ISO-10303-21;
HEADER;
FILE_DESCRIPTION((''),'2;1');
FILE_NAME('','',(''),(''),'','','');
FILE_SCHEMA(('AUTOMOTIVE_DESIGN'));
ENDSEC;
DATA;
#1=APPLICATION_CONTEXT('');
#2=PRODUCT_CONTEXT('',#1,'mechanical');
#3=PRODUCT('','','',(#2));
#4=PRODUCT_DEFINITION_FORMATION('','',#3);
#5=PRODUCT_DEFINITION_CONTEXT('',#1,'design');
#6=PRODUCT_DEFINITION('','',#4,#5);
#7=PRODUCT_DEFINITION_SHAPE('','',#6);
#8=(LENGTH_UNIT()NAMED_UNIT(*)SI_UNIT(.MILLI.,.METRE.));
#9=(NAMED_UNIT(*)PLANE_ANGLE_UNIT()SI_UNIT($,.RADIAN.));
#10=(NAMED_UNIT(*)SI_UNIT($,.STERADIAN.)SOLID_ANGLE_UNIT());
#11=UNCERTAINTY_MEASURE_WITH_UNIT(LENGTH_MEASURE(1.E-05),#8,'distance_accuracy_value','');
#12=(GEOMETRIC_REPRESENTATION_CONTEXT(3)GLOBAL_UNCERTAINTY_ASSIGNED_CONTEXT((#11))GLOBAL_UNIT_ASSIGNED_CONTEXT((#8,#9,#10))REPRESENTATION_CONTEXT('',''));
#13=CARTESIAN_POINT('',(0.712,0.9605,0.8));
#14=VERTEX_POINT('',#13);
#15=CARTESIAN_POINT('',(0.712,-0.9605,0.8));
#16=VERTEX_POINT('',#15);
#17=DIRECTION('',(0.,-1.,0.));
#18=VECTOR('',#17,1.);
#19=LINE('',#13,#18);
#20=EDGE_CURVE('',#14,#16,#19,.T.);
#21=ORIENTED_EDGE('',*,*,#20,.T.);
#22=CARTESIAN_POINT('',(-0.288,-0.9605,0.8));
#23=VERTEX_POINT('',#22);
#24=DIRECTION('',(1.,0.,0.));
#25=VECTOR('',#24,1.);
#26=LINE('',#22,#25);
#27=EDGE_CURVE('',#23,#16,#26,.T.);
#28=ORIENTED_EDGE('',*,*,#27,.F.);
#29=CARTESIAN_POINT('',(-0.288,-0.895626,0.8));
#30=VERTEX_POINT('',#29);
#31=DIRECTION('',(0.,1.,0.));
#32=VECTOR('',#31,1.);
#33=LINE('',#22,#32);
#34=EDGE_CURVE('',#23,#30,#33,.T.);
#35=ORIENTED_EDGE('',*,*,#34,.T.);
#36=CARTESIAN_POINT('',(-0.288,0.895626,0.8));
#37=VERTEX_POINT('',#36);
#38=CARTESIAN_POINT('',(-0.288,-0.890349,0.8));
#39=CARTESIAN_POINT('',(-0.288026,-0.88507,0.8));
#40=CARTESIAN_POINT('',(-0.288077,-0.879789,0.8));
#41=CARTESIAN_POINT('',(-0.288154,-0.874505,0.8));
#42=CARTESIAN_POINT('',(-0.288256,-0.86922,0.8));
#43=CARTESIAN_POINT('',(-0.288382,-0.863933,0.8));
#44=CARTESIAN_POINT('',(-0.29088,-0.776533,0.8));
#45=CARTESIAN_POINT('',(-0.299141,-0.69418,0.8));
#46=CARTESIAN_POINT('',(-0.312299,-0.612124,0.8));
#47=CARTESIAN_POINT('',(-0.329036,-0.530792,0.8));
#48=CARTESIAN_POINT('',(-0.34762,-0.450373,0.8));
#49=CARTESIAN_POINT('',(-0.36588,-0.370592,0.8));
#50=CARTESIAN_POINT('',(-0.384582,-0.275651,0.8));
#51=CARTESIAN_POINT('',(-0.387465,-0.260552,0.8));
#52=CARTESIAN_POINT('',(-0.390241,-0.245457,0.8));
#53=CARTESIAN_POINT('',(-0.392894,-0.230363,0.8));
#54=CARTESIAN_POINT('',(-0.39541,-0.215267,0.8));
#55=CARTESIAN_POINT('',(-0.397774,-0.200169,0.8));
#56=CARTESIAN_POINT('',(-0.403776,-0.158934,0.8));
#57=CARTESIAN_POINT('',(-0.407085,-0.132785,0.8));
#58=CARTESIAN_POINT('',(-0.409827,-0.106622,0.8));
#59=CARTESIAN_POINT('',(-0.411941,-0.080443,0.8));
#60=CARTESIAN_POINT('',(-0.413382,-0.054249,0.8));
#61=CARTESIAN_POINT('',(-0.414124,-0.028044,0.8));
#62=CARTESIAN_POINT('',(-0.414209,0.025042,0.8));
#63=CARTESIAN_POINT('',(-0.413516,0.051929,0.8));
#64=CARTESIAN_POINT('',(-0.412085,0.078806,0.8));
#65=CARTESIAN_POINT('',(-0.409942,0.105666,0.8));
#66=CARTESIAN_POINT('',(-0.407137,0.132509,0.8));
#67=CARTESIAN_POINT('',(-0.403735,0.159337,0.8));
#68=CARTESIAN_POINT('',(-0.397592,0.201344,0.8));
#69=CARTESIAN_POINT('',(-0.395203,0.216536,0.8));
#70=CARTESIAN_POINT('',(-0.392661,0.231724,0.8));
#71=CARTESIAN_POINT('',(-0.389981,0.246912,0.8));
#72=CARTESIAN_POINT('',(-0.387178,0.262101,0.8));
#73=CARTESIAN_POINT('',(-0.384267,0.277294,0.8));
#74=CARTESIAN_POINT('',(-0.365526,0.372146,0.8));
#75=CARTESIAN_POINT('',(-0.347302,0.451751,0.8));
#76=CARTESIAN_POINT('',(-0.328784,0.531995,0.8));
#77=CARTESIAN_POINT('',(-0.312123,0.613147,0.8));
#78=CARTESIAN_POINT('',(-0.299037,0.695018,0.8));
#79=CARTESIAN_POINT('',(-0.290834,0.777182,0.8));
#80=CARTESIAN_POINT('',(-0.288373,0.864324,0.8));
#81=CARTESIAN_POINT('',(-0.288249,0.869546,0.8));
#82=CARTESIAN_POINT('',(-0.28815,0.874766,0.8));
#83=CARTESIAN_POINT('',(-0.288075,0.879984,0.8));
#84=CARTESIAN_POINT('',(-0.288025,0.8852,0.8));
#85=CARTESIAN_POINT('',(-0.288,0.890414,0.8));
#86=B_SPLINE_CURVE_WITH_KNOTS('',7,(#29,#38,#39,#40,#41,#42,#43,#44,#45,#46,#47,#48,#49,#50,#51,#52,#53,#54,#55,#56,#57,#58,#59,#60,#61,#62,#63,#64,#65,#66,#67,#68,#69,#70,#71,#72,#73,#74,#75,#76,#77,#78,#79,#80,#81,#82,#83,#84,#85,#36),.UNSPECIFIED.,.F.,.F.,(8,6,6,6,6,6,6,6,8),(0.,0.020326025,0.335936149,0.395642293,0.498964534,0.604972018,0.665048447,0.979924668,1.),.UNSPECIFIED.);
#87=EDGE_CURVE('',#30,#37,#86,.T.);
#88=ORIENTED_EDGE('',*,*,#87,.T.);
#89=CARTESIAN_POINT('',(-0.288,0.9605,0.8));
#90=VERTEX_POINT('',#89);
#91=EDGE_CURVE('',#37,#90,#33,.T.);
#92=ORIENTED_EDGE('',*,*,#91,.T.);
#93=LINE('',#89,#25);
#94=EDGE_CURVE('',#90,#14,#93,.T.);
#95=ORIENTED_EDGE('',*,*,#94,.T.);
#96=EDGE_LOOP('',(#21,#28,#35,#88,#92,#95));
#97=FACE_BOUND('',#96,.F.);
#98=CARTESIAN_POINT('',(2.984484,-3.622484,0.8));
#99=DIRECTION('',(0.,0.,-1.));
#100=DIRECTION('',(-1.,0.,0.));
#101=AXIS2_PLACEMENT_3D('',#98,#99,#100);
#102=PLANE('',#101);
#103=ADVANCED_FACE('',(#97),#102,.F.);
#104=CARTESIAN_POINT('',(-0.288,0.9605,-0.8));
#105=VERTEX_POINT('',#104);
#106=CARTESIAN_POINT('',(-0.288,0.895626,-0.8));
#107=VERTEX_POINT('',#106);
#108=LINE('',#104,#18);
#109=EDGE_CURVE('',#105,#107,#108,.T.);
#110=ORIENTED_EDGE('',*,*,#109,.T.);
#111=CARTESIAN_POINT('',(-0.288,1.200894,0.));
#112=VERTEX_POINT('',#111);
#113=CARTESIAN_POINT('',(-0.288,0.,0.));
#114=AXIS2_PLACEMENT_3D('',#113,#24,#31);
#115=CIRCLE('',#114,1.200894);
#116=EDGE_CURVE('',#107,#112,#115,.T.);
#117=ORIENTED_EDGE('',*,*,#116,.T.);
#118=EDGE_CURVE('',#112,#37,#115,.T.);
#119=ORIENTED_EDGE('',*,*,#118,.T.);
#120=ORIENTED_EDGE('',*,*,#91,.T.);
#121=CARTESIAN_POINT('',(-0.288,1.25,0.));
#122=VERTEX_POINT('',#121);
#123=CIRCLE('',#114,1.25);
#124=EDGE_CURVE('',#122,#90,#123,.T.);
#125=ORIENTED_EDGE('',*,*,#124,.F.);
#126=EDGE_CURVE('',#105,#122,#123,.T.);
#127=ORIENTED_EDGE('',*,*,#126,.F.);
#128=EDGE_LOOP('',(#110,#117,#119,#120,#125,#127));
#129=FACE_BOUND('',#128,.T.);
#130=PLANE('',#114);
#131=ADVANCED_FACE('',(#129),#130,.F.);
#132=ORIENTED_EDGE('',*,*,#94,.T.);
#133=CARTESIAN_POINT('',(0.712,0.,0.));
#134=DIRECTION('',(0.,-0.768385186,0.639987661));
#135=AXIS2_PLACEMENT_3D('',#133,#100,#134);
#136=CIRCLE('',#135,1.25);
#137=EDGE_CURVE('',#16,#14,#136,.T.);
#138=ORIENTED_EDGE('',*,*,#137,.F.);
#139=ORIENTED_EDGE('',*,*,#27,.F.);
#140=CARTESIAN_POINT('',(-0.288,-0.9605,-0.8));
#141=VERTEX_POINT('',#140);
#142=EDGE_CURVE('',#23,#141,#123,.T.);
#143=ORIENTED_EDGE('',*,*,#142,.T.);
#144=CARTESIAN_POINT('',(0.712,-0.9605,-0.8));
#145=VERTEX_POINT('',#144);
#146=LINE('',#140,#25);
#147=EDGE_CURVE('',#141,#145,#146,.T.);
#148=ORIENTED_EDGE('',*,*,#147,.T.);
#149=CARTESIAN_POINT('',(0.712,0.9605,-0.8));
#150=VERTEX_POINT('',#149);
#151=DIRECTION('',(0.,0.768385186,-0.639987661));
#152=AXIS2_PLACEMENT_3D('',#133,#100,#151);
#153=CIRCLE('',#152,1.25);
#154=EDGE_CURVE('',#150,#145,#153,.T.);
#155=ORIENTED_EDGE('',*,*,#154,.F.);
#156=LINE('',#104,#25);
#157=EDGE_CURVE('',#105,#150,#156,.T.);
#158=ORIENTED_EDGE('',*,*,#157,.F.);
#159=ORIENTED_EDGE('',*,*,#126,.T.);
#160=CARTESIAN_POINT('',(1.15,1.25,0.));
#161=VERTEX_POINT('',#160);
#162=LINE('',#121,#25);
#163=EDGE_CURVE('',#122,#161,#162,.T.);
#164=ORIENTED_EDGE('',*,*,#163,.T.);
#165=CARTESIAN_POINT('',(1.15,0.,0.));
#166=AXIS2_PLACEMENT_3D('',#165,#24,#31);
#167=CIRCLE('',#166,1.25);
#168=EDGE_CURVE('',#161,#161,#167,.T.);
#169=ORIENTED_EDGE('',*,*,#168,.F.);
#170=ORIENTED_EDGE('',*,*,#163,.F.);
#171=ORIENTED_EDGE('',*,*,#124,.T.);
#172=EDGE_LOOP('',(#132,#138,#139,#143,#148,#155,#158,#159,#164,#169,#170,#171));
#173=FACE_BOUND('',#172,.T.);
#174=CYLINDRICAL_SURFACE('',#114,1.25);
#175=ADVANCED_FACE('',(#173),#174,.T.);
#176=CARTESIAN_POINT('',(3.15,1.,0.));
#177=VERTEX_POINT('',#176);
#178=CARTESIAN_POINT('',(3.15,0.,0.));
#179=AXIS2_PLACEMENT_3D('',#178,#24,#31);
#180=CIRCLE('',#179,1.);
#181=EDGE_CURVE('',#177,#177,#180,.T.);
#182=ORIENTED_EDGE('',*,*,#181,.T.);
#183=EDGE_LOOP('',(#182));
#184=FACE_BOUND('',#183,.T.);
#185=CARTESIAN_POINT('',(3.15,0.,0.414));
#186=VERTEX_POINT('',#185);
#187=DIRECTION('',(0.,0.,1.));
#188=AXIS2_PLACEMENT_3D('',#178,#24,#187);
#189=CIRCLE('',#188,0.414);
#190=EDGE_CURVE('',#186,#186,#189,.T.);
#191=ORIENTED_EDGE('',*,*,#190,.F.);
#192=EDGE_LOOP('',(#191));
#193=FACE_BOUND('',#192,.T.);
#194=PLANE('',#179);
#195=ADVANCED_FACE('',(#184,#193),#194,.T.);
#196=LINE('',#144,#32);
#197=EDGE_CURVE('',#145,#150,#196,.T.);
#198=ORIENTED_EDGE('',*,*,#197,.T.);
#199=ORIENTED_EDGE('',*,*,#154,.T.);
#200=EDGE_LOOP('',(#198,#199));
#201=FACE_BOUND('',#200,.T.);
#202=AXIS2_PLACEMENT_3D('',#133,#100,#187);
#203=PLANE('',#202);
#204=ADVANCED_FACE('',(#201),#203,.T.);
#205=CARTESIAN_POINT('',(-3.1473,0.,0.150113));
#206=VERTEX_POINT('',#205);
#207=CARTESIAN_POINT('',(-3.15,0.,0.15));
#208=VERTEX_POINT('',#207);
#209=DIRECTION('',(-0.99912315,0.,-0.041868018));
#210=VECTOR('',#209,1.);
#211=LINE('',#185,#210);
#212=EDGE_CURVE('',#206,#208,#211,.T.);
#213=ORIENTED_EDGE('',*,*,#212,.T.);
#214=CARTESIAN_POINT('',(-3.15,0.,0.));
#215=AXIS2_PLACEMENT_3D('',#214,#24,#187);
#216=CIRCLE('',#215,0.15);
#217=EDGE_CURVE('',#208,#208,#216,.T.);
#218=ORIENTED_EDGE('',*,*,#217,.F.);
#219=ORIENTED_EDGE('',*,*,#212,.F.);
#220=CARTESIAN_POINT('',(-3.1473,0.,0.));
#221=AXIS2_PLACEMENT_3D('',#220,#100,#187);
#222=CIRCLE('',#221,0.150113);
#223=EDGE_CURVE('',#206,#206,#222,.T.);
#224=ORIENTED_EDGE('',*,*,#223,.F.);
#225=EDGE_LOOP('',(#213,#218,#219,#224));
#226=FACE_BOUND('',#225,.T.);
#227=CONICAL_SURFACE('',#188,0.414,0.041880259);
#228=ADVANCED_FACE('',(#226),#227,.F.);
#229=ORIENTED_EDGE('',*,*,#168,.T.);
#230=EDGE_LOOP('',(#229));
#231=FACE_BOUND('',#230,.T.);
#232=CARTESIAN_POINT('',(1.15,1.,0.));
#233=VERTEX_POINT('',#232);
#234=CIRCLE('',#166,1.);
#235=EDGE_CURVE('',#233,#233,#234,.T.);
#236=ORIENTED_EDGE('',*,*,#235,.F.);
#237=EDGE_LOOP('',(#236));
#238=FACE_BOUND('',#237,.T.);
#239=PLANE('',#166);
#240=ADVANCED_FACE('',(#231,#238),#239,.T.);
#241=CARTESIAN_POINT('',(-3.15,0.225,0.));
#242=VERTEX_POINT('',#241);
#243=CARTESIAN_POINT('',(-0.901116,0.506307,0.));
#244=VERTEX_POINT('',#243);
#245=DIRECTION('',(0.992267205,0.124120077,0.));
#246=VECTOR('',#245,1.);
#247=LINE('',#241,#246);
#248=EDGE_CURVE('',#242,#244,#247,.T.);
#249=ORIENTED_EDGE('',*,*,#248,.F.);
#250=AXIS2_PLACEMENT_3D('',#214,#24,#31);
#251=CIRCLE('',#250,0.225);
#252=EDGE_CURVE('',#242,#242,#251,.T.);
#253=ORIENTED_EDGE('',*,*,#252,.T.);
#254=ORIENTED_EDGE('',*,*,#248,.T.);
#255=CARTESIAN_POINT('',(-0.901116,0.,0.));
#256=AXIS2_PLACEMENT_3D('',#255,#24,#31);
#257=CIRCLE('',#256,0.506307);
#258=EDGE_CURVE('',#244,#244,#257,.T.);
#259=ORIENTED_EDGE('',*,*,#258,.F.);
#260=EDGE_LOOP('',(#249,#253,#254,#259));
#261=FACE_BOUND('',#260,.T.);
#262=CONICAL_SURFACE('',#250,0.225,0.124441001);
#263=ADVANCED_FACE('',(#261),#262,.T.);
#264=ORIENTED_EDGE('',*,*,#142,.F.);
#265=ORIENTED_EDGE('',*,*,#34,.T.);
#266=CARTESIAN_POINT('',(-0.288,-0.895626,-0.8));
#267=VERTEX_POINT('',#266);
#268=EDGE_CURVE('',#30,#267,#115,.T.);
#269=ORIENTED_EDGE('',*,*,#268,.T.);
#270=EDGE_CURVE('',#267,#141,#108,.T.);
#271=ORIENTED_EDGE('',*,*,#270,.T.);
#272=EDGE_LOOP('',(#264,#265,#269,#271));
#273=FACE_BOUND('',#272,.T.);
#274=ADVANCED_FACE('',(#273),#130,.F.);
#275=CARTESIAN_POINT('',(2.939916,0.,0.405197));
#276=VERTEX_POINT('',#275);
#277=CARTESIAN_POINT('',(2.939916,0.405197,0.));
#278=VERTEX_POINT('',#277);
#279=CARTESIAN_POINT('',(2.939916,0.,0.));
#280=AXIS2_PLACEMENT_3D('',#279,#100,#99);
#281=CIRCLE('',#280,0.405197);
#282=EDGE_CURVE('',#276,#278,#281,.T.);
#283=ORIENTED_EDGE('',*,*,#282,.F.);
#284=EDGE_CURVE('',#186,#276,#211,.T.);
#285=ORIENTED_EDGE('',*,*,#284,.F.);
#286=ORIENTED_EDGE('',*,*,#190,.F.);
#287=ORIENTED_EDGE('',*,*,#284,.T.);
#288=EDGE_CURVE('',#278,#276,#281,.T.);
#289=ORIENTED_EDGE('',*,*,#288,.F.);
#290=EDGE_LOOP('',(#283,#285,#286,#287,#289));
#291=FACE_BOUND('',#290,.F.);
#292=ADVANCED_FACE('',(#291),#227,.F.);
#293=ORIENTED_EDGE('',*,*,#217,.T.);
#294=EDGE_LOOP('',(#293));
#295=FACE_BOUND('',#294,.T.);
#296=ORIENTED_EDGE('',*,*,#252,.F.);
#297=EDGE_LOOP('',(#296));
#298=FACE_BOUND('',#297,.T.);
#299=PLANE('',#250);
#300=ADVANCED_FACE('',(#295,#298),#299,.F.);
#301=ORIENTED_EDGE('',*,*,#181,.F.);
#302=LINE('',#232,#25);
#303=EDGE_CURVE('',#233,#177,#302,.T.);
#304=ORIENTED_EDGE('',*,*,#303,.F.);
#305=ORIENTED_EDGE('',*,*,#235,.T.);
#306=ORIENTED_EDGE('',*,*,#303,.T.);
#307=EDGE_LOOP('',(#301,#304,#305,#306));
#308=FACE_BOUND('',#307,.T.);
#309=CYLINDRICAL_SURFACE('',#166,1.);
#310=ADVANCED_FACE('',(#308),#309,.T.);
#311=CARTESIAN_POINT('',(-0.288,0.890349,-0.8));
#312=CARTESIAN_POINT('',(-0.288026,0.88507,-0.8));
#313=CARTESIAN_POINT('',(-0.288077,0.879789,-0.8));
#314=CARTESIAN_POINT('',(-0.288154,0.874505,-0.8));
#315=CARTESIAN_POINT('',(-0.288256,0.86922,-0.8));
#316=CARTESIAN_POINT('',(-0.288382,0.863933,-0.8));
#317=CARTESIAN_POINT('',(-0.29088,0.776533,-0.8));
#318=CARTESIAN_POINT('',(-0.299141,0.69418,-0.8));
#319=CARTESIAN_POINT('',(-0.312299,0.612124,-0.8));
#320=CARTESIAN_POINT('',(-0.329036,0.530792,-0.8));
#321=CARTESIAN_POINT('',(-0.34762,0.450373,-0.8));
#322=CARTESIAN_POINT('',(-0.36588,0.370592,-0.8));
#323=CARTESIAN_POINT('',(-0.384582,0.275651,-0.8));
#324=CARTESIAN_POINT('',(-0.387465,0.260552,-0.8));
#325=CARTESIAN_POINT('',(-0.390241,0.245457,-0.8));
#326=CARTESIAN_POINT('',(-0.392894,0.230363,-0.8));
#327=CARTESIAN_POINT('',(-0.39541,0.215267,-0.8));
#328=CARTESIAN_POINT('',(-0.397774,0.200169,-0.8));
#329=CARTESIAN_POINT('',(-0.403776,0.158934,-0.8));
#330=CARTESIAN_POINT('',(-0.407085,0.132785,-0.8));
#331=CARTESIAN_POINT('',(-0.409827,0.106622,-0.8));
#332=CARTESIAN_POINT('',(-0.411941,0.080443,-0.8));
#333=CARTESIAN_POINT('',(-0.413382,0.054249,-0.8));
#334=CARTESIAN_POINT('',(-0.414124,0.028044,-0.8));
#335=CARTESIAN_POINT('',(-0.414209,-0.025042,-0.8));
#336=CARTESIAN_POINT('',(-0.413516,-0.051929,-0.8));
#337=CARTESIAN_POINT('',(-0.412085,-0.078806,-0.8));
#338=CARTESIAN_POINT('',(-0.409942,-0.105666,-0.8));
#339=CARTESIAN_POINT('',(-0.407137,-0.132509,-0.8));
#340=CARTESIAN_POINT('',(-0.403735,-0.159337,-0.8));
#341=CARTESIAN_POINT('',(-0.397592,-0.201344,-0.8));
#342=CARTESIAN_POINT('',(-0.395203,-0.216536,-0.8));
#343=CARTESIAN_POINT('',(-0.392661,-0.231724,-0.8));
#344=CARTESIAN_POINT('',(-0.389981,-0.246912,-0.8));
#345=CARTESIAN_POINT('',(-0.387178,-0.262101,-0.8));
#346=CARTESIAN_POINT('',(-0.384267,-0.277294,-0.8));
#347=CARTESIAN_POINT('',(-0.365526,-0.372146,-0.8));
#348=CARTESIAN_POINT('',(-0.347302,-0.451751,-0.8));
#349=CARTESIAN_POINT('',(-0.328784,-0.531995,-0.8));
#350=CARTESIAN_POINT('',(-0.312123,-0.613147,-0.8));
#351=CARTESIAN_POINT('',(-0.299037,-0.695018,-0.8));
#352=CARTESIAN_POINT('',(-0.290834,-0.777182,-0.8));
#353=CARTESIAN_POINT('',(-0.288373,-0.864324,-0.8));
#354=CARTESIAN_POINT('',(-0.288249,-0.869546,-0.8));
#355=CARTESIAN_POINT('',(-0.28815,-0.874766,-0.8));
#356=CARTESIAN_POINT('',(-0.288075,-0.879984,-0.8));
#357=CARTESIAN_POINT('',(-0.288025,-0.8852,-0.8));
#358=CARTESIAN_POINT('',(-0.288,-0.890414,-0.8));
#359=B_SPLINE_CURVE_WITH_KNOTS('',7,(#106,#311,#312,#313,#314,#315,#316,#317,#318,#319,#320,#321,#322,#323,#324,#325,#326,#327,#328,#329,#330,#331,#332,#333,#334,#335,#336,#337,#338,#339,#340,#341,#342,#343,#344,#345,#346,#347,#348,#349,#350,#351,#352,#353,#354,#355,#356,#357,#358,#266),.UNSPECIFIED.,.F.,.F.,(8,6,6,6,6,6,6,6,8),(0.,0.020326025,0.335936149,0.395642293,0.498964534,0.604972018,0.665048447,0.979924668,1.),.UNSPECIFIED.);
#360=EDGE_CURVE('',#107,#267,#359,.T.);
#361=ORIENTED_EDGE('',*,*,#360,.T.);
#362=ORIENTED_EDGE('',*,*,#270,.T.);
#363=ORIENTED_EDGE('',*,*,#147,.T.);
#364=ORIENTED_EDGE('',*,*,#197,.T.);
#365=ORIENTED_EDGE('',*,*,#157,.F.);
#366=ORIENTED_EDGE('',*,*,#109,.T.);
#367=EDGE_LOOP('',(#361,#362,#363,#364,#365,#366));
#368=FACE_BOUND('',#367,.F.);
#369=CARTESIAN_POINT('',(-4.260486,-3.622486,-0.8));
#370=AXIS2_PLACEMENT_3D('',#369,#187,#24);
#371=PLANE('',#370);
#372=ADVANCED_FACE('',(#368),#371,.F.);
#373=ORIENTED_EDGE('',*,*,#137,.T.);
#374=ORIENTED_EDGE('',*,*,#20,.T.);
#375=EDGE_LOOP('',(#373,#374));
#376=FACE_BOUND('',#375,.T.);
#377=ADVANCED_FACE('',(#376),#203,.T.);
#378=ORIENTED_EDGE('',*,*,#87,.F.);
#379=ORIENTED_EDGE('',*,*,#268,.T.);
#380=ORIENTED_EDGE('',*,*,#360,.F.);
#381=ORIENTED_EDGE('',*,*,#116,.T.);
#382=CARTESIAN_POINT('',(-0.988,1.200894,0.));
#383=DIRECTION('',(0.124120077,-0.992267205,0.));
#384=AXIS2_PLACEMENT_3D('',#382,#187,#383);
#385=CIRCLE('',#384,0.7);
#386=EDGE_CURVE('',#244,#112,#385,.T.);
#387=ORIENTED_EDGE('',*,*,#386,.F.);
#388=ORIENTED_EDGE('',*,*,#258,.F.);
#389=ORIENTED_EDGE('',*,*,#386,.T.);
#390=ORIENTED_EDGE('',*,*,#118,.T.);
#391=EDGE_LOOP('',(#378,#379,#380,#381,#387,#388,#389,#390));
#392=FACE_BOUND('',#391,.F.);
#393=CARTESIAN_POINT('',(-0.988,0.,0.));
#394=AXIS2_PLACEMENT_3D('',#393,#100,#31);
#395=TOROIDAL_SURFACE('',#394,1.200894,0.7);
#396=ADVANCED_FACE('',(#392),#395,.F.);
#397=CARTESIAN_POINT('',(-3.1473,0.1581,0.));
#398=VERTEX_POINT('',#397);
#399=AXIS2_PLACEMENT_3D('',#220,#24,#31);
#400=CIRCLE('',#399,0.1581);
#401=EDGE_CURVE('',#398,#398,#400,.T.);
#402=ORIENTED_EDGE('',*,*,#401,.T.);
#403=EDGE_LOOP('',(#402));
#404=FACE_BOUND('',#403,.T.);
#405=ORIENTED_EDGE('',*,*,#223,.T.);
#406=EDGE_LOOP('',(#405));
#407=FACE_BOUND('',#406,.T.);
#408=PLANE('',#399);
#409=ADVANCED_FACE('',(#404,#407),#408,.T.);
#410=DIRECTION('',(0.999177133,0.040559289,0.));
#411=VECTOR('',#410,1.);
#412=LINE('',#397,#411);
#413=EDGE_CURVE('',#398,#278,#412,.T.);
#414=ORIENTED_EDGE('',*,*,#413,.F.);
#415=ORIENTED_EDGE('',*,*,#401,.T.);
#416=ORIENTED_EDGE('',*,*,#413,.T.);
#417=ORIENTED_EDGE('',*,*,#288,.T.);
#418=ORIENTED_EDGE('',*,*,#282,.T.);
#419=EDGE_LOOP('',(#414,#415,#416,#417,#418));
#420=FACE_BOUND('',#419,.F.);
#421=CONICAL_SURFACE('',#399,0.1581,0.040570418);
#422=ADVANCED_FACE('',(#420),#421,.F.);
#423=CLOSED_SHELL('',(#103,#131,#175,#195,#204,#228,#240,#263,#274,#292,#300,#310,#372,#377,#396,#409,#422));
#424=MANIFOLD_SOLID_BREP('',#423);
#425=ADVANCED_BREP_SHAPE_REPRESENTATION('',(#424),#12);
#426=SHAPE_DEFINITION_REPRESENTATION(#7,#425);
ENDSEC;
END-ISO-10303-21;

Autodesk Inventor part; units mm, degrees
sketch "Skizze1" plane through (0, 0, 0) normal (0, 0, 1) x (1, 0, 0)
  line L0 (-4.5575, 0) -> (5.2951, 0) projected
  line L1 (0, -0.25) -> (0, 1.5) projected
  line L2 (-3.15, 0) -> (-3.15, 0.225)
  line L3 (-3.15, 0.225) -> (-0.288, 0.583)
  line L4 (-3.15, 0.225) -> (-0.2657, 0.225) construction
  line L5 (-0.288, 0.583) -> (-0.288, 1.25)
  line L6 (-0.288, 1.25) -> (1.15, 1.25)
  line L7 (1.15, 1.25) -> (1.15, 1)
  line L8 (1.15, 1) -> (3.15, 1)
  line L9 (3.15, 1) -> (3.15, 0)
  arc A0 (3.8876, 1) -> (3.801, 0.95) centre (3.8876, 0.9) ccw
  arc A1 (3.2366, 0.95) -> (3.15, 1) centre (3.15, 0.9) ccw
  arc A2 (3.4322, 0.6112) -> (3.6054, 0.6112) centre (3.5188, 0.6612) ccw
  line L10 (3.4322, 0.6112) -> (3.2366, 0.95)
  line L11 (3.6054, 0.6112) -> (3.801, 0.95)
  line L12 (3.8876, 1) -> (3.15, 1)
  point P0 (0, 0)
  point P1 (3.1775, 0.57)
  dimension "d0" = 7.13
  dimension "d1" = 2
  dimension "d2" = 2.862
  dimension "d3" = 6.3
  dimension "d4" = 2
  dimension "d5" = 2.5
  dimension "d6" = 0.45
  dimension "d27" = 0.2
  dimension "d28" = 0.2
  dimension "d29" = 0.2
  dimension "d30" = 60
revolve "Umdrehung1" add sketch "Skizze1" angle 360 about axis through (-10, 0, 0) along (1, 0, 0) contours L2 L3 L5 L6 L1 L0 | L1 L6 L7 L8 L9 L0
sketch "Skizze2" plane through (-0.288, 0, 0) normal (-1, 0, 0) x (0, 0, 1)
  circle A0 centre (0, 0) radius 0.583 projected
  circle A1 centre (0, 0) radius 1.25 projected
  circle A2 centre (0, 0) radius 1.25 projected
  line L0 (-0.8, -0.9605) -> (-0.8, 0.9605)
  line L1 (0, -1.75) -> (0, 1.75) projected
  line L2 (-1.75, 0) -> (1.75, 0) projected
  line L3 (0.8, -0.9605) -> (0.8, 0.9605)
  circle A3 centre (0, 0) radius 0.225 projected
  arc A4 (-0.8, 0.9605) -> (-0.8, -0.9605) centre (0, 0) ccw
  arc A5 (0.8, -0.9605) -> (0.8, 0.9605) centre (0, 0) ccw
  dimension "d10" = 1.6
extrude "Extrusion1" cut sketch "Skizze2" against normal blind 1 contours L3 A1 L2 | L2 A1 L3 | L2 A1 L0 | L0 A1 L2
fillet "Rundung1" radius 0.7 1 edges at (-0.288, -0.583, 0)
ref_plane "Arbeitsebene1" through (1.565, 0, 0) normal (1, 0, 0) x (0, 0, -1)
ref_plane "Arbeitsebene2" through (0, 0, 0) normal (0, 1, 0) x (-1, 0, 0)
sketch "Skizze4" plane through (0, 0, 0) normal (0, 1, 0) x (-1, 0, 0)
  line L0 (-3.15, 1) -> (-3.15, -1) projected
  line L1 (-3.15, 0.414) -> (3.15, 0.15)
  line L2 (3.15, 0.225) -> (3.15, -0.225) projected
  line L3 (4.41, 0) -> (-4.41, 0) projected
  line L4 (-3.15, 0.414) -> (-3.15, 0)
  line L5 (3.15, 0.15) -> (3.15, 0)
  point P0 (0, 0)
  dimension "d24" = 177.6
  dimension "d25" = 0.828
revolve "Umdrehung2" cut sketch "Skizze4" angle 360 about axis through (-10, 0, 0) along (1, 0, 0)
ref_plane "Arbeitsebene3" through (0, 0, 0) normal (0, 1, 0) x (-1, 0, 0)
ref_plane "Arbeitsebene4" through (1.15, 0, 0) normal (1, 0, 0) x (0, 1, 0)
sketch "Skizze7" plane through (1.15, 0, 0) normal (1, 0, 0) x (0, 1, 0)
  circle A0 centre (0, 0) radius 1
  circle A1 centre (0, 0) radius 0.3301
  dimension "d48" = 2
extrude "Extrusion5" add sketch "Skizze7" along normal blind 0.45
ref_plane "Arbeitsebene5" through (0, 0, 0) normal (0, 0, 1) x (1, 0, 0)
sketch "Skizze8" plane through (0, 0, 0) normal (0, 0, 1) x (1, 0, 0)
  line L0 (-3.892, 0) -> (3.9838, 0)
  line L1 (-3.1473, 0.1581) -> (3.1494, 0.4137)
  line L2 (-3.1473, 0.1581) -> (-3.1473, 0)
  line L3 (3.1494, 0.4137) -> (3.1494, 0)
  line L4 (-3.1473, 0) -> (3.1494, 0)
  point P0 (0, 0)
  dimension "d56" = 0.3163
  dimension "d57" = 0.8275
revolve "Umdrehung3" cut sketch "Skizze8" angle 360 about axis through (-3.892, 0, 0) along (1, 0, 0)
thread "Gewinde2" size "M2x0.4" class "6g" standard "ISO Metric profile" length 10
properties part number "YTP-AP-E03-R1.0" material "Stahl"
